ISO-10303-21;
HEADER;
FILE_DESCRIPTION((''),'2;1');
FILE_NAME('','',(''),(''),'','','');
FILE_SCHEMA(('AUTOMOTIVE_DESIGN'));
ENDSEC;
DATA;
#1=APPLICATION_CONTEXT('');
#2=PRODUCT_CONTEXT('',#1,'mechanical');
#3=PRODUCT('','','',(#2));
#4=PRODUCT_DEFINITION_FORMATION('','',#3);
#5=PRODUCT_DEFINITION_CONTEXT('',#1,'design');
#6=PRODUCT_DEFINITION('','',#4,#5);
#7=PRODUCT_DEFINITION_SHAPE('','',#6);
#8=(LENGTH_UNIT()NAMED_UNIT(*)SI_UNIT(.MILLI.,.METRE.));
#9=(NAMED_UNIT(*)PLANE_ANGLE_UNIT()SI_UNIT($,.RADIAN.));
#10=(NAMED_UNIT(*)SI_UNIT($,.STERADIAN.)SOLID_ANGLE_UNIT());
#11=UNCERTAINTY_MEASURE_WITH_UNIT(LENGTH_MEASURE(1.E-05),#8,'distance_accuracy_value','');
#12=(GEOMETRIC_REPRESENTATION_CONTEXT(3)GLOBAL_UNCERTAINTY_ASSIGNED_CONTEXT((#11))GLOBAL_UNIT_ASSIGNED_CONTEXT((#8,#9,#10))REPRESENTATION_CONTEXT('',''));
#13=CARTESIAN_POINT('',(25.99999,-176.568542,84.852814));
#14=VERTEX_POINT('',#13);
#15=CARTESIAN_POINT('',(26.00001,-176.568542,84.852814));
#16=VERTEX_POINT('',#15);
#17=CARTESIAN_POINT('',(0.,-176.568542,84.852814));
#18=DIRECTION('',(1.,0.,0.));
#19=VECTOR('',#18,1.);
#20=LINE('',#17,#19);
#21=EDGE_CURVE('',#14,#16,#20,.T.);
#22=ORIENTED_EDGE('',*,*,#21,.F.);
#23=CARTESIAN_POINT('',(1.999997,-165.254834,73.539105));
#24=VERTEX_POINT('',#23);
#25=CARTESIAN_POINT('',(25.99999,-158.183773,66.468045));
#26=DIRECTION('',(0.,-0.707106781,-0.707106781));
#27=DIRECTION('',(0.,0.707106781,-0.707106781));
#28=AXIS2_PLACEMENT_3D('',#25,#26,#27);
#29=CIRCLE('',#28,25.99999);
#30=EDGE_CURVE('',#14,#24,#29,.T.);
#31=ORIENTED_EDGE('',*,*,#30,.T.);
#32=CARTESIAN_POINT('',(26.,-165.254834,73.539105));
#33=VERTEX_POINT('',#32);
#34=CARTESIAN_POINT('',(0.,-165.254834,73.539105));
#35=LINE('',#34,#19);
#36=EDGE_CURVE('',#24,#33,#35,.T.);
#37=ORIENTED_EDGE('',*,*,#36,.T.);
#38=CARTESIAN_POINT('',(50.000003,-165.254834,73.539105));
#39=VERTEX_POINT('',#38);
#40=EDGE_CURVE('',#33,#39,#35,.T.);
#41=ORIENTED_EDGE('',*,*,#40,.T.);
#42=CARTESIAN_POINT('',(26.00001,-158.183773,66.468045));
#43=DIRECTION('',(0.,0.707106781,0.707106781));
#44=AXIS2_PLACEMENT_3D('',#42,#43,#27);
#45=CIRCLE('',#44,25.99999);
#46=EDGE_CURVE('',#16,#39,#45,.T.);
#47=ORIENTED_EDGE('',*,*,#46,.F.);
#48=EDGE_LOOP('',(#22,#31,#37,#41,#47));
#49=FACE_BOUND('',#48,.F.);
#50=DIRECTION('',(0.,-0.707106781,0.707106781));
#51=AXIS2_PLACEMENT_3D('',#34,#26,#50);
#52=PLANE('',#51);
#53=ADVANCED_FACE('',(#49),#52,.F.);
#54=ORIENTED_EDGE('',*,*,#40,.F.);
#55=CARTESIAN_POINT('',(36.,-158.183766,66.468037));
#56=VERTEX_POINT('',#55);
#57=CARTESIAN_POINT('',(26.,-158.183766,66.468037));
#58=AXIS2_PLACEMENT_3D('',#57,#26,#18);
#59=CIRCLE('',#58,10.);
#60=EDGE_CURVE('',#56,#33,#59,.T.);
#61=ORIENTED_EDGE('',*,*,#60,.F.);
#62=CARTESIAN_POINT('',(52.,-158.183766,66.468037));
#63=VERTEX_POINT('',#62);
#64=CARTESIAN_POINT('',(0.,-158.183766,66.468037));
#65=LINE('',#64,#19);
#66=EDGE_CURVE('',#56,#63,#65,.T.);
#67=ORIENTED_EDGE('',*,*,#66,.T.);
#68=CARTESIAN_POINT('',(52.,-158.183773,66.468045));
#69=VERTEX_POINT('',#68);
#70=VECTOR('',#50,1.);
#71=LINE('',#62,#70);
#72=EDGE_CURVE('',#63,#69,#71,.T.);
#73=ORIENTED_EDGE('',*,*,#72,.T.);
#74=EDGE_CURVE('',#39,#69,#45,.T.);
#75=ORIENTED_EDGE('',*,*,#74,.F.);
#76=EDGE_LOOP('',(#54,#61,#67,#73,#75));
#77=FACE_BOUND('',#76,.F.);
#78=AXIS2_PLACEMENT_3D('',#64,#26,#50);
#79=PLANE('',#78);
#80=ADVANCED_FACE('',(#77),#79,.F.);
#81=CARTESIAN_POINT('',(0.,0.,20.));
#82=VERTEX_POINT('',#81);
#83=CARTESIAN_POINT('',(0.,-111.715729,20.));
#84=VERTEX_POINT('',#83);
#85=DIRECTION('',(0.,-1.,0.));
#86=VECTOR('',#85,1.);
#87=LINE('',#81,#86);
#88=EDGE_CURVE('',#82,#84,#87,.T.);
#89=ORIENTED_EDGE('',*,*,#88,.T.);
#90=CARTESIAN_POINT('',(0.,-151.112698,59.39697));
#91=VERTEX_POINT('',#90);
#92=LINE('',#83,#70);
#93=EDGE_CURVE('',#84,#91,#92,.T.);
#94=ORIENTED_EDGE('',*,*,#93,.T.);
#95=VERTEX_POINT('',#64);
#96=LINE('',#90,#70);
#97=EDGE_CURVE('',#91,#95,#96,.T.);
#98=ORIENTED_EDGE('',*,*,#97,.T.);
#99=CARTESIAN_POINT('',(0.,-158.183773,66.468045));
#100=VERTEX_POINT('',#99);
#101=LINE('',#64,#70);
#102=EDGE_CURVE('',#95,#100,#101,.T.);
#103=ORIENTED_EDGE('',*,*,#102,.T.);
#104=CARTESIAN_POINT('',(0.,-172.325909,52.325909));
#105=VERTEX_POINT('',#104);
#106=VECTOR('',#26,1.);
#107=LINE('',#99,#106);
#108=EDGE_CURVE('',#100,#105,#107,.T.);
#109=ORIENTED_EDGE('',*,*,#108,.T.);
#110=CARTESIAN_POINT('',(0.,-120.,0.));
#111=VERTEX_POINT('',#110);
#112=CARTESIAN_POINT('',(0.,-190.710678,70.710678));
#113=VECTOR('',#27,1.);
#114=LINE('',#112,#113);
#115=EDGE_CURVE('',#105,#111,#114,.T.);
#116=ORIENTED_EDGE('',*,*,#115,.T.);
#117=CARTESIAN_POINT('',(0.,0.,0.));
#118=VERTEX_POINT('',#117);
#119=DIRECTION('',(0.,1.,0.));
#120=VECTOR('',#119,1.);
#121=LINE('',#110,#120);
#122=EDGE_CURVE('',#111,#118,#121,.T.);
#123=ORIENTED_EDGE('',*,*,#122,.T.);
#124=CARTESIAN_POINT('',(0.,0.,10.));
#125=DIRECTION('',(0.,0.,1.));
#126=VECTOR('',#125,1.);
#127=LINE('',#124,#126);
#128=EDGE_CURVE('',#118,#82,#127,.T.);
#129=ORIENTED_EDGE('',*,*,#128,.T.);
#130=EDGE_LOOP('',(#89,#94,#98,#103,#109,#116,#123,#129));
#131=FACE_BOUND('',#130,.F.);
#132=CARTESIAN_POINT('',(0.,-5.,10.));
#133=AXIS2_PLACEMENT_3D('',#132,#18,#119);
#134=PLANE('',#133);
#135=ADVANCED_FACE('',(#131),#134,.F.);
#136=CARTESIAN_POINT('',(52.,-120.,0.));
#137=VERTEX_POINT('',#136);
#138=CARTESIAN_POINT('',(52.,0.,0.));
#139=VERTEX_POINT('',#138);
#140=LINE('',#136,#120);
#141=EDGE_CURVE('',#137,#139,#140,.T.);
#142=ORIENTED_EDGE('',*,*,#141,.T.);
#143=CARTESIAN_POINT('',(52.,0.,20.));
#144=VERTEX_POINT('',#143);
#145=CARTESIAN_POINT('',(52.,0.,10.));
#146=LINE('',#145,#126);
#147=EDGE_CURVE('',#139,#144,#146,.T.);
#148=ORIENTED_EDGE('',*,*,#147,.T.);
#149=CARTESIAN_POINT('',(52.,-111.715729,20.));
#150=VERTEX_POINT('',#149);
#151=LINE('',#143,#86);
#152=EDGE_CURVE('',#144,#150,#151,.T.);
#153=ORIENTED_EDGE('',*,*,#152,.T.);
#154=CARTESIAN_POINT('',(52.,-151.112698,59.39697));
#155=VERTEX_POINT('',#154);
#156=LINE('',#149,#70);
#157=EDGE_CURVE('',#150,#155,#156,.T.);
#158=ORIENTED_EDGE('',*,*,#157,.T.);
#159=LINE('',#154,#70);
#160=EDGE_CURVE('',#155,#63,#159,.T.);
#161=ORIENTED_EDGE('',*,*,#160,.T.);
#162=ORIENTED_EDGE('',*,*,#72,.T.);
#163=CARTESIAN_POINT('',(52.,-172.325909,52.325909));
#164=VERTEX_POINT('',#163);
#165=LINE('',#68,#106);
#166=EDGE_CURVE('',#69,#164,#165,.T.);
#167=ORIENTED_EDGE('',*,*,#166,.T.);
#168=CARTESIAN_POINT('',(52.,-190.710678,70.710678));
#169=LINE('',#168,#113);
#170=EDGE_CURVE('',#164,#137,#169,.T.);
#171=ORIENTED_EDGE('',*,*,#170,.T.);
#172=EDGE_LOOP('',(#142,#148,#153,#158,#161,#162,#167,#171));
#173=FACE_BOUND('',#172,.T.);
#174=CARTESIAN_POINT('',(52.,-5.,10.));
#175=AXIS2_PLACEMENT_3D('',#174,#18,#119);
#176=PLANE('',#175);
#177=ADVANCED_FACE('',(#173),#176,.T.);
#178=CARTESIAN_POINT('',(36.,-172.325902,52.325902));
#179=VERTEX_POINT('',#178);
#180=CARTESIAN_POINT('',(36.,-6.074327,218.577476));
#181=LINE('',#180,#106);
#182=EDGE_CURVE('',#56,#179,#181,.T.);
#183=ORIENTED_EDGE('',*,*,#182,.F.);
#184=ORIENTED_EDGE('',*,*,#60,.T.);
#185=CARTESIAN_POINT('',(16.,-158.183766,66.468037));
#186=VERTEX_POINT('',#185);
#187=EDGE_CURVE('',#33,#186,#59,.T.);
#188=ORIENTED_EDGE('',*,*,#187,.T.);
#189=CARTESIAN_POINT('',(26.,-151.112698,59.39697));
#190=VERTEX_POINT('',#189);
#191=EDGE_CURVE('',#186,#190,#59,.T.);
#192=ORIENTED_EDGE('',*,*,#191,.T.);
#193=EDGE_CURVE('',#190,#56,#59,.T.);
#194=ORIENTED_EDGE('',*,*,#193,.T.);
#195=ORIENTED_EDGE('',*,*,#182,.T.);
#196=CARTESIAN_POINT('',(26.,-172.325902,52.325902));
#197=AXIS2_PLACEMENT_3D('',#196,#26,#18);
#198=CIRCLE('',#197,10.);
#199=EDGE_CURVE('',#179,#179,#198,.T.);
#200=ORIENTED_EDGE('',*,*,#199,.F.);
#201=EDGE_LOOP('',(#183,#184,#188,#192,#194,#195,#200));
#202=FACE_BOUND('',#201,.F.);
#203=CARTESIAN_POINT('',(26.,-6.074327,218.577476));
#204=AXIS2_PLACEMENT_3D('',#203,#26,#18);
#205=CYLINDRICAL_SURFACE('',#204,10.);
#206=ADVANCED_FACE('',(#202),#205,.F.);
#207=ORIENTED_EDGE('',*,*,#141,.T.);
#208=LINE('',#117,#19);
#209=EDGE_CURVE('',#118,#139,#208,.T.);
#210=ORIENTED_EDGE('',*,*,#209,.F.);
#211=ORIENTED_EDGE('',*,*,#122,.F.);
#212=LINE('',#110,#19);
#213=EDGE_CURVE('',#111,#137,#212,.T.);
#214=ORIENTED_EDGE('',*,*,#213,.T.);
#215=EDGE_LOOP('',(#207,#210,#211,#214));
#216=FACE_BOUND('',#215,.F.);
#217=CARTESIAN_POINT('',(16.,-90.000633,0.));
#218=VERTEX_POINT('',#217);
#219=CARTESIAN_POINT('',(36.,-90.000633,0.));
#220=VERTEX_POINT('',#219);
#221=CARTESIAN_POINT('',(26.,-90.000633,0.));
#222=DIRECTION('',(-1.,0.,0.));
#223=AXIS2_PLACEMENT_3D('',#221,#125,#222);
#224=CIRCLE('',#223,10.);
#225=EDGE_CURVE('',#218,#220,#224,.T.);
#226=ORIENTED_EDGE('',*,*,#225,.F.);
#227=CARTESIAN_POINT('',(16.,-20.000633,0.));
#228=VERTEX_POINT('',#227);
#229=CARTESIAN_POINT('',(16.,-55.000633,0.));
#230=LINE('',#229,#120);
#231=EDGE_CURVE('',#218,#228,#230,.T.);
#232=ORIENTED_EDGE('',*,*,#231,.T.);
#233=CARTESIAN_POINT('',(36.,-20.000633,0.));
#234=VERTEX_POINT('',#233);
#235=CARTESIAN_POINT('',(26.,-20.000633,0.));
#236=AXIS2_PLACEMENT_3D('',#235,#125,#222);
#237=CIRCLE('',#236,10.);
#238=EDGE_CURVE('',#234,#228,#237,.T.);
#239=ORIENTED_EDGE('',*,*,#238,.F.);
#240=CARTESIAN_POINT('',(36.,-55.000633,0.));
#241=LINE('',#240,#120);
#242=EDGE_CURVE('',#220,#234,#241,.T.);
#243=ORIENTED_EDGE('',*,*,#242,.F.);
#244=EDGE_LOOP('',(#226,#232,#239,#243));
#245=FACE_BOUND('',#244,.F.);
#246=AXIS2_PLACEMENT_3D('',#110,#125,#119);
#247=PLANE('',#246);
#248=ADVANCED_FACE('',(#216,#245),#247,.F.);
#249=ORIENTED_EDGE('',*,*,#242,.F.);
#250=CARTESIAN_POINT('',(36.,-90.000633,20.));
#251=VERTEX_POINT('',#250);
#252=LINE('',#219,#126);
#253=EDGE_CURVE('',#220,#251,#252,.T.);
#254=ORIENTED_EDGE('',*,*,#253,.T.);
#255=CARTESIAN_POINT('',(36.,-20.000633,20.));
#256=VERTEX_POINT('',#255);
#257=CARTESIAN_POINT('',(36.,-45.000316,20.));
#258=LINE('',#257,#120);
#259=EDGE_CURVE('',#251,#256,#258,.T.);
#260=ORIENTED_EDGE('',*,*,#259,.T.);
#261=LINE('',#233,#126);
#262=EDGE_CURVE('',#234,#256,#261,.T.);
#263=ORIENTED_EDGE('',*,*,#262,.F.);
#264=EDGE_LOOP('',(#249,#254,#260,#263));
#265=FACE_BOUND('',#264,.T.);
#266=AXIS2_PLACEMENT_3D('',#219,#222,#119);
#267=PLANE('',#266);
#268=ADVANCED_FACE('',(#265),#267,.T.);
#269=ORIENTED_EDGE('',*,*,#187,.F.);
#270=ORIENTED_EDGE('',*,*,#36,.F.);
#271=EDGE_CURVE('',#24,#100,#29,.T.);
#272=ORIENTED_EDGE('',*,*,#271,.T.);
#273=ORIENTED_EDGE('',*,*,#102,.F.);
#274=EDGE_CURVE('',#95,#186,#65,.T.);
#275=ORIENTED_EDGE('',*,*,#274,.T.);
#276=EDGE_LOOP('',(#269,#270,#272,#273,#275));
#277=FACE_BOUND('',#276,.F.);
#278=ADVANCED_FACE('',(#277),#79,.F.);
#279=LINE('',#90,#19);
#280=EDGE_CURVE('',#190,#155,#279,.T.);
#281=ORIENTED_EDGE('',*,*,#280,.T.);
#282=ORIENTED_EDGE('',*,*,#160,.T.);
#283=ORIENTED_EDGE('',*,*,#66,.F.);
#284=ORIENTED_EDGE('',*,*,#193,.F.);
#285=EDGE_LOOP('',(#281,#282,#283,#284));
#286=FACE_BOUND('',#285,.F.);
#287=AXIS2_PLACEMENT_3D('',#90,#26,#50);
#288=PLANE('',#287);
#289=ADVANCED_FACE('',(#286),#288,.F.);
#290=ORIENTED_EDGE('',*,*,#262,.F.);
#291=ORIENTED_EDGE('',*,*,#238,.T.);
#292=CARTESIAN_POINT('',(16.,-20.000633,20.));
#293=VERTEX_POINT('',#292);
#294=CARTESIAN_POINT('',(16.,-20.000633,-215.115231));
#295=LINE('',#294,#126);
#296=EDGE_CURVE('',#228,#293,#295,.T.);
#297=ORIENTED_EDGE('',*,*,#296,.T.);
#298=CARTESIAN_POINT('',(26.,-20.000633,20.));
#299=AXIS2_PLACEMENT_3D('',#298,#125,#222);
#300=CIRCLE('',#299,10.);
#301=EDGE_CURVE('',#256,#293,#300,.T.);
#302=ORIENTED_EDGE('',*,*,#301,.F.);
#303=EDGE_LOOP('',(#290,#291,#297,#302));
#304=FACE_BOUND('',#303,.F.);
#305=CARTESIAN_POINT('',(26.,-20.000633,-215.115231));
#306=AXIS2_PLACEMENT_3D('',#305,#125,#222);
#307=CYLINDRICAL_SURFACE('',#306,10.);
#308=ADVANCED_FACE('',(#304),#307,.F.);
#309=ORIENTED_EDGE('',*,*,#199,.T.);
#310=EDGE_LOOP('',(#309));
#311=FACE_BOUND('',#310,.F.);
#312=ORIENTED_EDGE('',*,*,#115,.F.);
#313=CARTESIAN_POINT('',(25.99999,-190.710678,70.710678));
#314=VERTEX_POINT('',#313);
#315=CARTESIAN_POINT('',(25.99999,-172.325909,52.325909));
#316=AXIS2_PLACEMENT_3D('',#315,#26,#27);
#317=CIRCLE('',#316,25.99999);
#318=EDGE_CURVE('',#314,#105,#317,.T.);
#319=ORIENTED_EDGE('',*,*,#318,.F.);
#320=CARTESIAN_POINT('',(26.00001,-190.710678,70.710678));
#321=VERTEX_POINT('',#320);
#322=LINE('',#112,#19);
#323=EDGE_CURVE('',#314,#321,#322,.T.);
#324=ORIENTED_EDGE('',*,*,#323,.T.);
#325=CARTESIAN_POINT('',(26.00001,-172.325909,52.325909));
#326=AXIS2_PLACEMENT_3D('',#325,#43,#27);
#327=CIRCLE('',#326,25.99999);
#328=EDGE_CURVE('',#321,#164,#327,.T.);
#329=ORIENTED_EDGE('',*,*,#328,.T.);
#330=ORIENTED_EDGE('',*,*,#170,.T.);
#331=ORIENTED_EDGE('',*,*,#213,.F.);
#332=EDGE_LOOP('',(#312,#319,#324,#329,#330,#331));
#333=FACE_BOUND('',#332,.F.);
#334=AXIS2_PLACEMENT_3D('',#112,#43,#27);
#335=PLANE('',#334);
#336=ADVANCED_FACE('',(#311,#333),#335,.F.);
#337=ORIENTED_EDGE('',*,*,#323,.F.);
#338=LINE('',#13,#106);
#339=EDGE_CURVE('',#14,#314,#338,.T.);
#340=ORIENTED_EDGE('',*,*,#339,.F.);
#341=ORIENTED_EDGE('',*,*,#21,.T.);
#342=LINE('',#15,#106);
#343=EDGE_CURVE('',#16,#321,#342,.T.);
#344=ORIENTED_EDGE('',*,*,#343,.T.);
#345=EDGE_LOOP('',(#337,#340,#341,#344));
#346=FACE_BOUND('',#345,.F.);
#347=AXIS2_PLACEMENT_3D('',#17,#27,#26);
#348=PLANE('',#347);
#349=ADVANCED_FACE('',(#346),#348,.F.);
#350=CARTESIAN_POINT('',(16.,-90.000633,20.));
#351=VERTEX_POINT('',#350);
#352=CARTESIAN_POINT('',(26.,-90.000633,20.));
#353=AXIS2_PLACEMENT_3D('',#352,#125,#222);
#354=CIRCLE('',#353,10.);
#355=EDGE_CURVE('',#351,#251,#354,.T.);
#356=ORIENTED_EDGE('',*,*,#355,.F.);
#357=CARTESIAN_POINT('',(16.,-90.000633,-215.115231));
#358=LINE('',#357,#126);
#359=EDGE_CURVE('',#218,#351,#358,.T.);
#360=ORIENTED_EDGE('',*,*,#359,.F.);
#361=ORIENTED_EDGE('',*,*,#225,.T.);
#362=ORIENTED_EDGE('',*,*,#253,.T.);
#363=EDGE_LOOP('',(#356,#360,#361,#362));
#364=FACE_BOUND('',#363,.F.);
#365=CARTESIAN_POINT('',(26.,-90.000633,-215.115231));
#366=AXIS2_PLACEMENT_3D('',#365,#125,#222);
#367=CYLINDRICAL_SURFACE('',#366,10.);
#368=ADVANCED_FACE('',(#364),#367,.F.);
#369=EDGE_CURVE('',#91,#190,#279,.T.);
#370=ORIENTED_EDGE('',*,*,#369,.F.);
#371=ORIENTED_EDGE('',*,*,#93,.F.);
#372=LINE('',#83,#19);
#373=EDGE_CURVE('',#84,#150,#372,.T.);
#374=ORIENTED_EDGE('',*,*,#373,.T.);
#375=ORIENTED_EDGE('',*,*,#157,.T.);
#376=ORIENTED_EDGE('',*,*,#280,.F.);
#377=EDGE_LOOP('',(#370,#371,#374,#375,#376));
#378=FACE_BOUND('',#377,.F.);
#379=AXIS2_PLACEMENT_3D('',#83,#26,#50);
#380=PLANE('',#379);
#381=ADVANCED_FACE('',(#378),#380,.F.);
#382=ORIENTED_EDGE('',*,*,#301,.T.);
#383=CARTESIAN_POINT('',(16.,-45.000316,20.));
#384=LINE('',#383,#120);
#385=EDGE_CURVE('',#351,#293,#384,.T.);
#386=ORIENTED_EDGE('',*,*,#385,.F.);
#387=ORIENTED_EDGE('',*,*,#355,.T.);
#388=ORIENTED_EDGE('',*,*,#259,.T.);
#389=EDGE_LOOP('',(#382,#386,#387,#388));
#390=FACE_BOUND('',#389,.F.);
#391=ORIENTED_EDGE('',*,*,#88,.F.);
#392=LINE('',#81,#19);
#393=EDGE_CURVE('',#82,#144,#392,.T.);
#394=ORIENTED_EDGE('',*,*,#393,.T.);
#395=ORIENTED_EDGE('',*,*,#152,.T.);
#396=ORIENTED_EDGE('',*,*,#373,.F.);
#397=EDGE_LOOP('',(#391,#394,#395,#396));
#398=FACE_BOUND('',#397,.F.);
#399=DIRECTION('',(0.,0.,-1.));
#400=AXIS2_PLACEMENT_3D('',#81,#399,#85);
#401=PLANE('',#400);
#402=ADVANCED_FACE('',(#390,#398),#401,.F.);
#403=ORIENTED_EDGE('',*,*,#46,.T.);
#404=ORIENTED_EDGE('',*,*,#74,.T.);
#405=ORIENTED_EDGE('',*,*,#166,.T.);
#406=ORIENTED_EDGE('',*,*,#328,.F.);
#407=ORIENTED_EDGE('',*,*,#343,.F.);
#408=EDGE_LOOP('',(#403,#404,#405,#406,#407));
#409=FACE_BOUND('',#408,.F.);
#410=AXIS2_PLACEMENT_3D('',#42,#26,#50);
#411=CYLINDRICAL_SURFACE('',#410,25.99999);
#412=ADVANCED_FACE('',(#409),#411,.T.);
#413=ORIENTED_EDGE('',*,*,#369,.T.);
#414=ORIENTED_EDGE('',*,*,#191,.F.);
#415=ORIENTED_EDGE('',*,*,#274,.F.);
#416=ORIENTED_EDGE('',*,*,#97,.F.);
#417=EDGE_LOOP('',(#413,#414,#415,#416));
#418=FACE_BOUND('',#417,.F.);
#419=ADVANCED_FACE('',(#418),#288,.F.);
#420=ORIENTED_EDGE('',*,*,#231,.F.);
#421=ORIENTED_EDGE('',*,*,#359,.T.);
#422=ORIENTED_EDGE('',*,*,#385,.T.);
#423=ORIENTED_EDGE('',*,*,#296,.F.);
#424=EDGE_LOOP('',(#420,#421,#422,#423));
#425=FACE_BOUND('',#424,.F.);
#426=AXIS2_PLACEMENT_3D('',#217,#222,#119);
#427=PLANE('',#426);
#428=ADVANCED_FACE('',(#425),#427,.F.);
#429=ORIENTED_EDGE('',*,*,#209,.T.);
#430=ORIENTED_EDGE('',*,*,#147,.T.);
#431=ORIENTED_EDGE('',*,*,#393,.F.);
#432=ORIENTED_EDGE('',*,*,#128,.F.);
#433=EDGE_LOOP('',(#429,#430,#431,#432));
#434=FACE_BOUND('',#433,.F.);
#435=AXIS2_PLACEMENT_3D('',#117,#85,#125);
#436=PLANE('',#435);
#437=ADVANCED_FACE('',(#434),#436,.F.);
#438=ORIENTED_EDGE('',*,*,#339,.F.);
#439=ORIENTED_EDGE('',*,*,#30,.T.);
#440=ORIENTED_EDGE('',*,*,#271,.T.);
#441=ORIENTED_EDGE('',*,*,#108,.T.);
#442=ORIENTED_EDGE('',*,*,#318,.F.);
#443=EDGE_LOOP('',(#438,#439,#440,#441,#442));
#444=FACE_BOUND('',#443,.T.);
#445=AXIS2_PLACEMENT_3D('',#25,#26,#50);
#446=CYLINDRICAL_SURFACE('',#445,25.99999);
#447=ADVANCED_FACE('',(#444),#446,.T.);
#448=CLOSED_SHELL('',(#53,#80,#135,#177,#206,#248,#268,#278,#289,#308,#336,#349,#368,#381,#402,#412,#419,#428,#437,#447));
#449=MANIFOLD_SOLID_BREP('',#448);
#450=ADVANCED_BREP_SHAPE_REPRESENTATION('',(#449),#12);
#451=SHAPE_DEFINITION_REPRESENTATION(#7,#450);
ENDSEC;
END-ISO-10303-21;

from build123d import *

# Parameters (mm, degrees)
F0_W     = 10
F0_H     = 20
F0_W_2   = 50
F2_DEPTH = 52
F3_R     = 25.99999
F4_D     = 20
F1_W     = 10
F1_H     = 70
F5_DEPTH = 47
F7_D     = 20


# Not quite as in the source:
# - a fillet or chamfer is up to 0.001 mm smaller than in the source, because OpenCascade refuses the exact size


with BuildPart() as f2:
    # F0 (on Right) → F2 (new body)
    with BuildSketch(Plane.YZ):
        with Locations((-5, 10)):
            Rectangle(F0_W, F0_H)
        with Locations((-15, 10)):
            Rectangle(F0_W, F0_H)
        with Locations((-25, 10)):
            Rectangle(F0_W, F0_H)
        with Locations((-55, 10)):
            Rectangle(F0_W_2, F0_H)
        with Locations((-85, 10)):
            Rectangle(F0_W, F0_H)
        with Locations((-95, 10)):
            Rectangle(F0_W, F0_H)
        Polygon((-120, 0), (-100, 0), (-100, 20), (-111.7157287525, 20), (-151.1126983722, 59.3969696197), (-165.2548339959, 45.2548339959), align=None)
        Polygon((-172.3259018078, 52.3259018078), (-165.2548339959, 45.2548339959), (-151.1126983722, 59.3969696197), (-158.1837661841, 66.4680374315), align=None)
        Polygon((-179.3969696197, 59.3969696197), (-172.3259018078, 52.3259018078), (-158.1837661841, 66.4680374315), (-165.2548339959, 73.5391052434), align=None)
        Polygon((-190.7106781187, 70.7106781187), (-179.3969696197, 59.3969696197), (-165.2548339959, 73.5391052434), (-176.5685424949, 84.8528137424), align=None)
    extrude(amount=F2_DEPTH)

    # F3 (radius 26 in the source; OpenCascade refuses exactly that, so slightly less here)
    f3_edges = [f2.edges().sort_by_distance(p)[0] for p in [
        (52, -183.63961, 77.781746),
        (0, -183.63961, 77.781746),
    ]]
    fillet(f3_edges, radius=F3_R)

    # F4 (through all)
    with Locations(Plane(origin=(0, 0, 0), x_dir=(1, 0, 0), z_dir=(0, 0, -1))):
        with Locations((26, 90.0006328523), (26, 20.0006328523)):
            Hole(F4_D / 2)

    # F1 (on Top) → F5 (cut)
    with BuildSketch(Plane.XY):
        with Locations((31, -55.0006328523)):
            Rectangle(F1_W, F1_H)
        with Locations((21, -55.0006328523)):
            Rectangle(F1_W, F1_H)
    extrude(amount=F5_DEPTH, mode=Mode.SUBTRACT)

    # F7 (through all)
    with Locations(Plane(origin=(0, -45.8578643763, -45.8578643763), x_dir=(-1, 0, 0), z_dir=(0, 0.7071067812, 0.7071067812))):
        with Locations((-26, 158.8528137424)):
            Hole(F7_D / 2)


solid = f2.part
